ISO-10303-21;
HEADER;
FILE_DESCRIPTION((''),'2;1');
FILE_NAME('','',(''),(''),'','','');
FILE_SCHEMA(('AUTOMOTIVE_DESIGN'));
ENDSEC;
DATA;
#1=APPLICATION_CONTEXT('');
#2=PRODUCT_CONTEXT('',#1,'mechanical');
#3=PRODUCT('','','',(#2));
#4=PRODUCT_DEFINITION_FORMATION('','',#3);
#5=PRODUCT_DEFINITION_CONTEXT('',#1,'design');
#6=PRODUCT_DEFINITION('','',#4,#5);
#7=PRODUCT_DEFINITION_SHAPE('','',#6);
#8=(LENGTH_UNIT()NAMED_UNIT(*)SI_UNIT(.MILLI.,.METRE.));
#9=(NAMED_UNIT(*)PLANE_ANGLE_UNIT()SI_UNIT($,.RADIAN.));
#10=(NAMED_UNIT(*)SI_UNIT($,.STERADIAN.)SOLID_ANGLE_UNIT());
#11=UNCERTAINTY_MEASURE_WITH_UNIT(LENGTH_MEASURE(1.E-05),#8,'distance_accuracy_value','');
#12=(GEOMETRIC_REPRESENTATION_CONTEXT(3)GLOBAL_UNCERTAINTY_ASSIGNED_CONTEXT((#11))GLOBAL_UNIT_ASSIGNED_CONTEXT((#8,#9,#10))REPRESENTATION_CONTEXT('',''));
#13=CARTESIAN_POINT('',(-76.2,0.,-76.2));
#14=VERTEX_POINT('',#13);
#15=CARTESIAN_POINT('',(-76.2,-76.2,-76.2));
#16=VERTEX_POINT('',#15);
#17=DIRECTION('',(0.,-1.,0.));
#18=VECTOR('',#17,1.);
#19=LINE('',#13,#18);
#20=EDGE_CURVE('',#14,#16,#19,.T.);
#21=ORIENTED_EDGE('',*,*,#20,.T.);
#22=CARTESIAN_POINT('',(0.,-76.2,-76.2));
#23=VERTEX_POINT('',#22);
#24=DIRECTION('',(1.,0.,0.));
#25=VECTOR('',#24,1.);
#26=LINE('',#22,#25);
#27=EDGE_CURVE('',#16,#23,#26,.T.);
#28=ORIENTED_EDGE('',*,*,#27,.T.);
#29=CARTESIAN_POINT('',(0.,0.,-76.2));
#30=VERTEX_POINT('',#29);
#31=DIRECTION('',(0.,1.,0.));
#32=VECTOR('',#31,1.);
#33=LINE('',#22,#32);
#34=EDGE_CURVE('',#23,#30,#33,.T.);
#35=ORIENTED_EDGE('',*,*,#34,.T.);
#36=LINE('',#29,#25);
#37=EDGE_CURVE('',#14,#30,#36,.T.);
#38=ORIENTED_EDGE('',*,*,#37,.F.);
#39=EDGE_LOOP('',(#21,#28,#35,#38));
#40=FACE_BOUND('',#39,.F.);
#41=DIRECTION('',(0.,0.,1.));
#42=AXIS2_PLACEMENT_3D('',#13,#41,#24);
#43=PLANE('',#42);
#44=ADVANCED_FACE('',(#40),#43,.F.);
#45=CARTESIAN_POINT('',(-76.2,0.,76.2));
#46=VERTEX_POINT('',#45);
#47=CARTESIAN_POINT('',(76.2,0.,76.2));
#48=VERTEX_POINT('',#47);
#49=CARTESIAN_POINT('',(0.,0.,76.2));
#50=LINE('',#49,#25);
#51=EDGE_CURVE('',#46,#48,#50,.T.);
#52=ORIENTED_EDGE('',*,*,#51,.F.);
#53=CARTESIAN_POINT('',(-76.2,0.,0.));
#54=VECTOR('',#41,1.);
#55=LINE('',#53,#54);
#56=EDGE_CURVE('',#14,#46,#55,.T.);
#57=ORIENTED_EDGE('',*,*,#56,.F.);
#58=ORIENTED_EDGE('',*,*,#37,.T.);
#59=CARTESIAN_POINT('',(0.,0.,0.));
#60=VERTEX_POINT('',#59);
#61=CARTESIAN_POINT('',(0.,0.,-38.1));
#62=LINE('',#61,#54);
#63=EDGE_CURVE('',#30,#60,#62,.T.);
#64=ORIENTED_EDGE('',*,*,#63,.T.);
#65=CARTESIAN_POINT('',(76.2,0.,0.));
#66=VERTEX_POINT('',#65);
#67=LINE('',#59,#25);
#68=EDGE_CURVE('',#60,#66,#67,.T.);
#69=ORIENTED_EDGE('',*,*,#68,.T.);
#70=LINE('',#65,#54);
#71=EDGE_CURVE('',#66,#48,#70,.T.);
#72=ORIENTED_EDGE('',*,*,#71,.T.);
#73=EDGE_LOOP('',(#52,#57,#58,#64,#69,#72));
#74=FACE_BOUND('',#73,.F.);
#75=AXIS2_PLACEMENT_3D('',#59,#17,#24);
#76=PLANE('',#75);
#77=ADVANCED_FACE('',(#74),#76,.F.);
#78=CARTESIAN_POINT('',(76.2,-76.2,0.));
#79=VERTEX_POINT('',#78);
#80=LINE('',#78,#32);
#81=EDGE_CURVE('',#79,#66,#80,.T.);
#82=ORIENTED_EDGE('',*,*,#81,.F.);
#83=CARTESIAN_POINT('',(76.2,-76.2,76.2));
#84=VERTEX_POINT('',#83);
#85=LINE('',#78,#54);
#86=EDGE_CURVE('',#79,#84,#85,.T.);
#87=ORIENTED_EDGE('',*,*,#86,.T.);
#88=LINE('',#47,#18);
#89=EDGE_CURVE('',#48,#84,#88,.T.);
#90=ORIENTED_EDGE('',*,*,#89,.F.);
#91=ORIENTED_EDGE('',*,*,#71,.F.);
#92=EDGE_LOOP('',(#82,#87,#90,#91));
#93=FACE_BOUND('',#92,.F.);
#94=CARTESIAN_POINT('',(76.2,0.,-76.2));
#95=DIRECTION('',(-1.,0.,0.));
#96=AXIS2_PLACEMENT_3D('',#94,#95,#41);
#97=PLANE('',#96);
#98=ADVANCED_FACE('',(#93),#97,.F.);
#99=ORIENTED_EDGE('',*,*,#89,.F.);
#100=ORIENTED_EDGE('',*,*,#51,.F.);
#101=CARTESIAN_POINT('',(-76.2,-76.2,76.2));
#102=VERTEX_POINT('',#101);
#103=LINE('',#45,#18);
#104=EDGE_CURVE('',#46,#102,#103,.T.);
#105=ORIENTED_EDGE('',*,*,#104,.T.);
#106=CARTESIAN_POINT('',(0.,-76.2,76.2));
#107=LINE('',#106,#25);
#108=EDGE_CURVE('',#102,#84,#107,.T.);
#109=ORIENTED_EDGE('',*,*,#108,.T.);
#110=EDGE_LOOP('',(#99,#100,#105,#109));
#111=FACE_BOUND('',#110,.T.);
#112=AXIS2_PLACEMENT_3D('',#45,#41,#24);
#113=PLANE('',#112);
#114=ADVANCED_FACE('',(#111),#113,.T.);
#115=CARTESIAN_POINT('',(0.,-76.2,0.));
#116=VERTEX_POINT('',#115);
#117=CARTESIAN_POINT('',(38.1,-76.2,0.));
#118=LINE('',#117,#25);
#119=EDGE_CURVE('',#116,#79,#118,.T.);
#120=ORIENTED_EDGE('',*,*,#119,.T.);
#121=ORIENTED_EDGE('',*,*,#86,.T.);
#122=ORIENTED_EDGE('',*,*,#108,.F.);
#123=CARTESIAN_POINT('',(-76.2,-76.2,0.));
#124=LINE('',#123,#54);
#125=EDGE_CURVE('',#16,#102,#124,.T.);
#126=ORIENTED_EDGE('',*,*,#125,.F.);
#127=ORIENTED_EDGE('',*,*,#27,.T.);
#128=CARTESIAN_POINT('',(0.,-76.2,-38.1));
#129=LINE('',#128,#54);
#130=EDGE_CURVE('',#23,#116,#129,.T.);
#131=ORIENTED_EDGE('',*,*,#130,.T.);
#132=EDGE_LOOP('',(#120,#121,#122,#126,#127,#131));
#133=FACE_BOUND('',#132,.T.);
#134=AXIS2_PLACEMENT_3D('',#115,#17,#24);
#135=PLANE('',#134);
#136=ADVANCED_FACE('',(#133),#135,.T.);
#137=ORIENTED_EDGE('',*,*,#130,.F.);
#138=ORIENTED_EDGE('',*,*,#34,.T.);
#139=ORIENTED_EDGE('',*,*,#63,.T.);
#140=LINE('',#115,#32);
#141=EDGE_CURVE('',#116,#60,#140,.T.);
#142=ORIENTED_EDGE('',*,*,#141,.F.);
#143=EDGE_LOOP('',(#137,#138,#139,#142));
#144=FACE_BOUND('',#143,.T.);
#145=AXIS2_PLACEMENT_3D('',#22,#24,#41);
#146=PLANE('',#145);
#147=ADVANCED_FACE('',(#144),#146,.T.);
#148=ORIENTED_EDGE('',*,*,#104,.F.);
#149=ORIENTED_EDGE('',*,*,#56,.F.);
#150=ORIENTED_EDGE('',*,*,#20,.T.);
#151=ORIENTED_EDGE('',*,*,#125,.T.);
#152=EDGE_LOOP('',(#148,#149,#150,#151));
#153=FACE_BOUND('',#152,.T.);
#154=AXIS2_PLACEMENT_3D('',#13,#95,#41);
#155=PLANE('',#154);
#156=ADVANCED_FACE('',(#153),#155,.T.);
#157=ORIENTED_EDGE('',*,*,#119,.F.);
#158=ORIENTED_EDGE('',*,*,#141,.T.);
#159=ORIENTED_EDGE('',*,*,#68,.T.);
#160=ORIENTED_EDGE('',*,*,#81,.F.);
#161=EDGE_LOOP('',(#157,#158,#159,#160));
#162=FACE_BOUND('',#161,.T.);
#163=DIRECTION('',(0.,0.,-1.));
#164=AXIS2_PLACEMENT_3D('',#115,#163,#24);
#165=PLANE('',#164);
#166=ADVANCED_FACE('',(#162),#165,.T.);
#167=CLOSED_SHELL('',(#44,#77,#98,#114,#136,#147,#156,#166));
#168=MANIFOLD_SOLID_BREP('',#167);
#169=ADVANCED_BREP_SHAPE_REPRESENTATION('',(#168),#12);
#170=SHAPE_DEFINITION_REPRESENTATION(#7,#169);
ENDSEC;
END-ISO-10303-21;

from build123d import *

# Parameters (mm, degrees)
F1_W     = 152.4
F1_H     = 152.4
F2_DEPTH = 76.2
F3_W     = 76.2
F3_H     = 76.2
F4_DEPTH = 76.201


# Not quite as in the source:
# - a variable given as a bare number and used for a length is read in inches; the dataset says mm whatever the document's units were


with BuildPart() as f2:
    # F1 (on Front) → F2 (new body)
    with BuildSketch(Plane.XZ):
        Rectangle(F1_W, F1_H)
    extrude(amount=F2_DEPTH)

    # F3 (on face) → F4 (cut, through all)
    with BuildSketch(Plane.XZ.offset(76.2)):
        with Locations((38.1, -38.1)):
            Rectangle(F3_W, F3_H)
    extrude(amount=-F4_DEPTH, mode=Mode.SUBTRACT)


solid = f2.part
